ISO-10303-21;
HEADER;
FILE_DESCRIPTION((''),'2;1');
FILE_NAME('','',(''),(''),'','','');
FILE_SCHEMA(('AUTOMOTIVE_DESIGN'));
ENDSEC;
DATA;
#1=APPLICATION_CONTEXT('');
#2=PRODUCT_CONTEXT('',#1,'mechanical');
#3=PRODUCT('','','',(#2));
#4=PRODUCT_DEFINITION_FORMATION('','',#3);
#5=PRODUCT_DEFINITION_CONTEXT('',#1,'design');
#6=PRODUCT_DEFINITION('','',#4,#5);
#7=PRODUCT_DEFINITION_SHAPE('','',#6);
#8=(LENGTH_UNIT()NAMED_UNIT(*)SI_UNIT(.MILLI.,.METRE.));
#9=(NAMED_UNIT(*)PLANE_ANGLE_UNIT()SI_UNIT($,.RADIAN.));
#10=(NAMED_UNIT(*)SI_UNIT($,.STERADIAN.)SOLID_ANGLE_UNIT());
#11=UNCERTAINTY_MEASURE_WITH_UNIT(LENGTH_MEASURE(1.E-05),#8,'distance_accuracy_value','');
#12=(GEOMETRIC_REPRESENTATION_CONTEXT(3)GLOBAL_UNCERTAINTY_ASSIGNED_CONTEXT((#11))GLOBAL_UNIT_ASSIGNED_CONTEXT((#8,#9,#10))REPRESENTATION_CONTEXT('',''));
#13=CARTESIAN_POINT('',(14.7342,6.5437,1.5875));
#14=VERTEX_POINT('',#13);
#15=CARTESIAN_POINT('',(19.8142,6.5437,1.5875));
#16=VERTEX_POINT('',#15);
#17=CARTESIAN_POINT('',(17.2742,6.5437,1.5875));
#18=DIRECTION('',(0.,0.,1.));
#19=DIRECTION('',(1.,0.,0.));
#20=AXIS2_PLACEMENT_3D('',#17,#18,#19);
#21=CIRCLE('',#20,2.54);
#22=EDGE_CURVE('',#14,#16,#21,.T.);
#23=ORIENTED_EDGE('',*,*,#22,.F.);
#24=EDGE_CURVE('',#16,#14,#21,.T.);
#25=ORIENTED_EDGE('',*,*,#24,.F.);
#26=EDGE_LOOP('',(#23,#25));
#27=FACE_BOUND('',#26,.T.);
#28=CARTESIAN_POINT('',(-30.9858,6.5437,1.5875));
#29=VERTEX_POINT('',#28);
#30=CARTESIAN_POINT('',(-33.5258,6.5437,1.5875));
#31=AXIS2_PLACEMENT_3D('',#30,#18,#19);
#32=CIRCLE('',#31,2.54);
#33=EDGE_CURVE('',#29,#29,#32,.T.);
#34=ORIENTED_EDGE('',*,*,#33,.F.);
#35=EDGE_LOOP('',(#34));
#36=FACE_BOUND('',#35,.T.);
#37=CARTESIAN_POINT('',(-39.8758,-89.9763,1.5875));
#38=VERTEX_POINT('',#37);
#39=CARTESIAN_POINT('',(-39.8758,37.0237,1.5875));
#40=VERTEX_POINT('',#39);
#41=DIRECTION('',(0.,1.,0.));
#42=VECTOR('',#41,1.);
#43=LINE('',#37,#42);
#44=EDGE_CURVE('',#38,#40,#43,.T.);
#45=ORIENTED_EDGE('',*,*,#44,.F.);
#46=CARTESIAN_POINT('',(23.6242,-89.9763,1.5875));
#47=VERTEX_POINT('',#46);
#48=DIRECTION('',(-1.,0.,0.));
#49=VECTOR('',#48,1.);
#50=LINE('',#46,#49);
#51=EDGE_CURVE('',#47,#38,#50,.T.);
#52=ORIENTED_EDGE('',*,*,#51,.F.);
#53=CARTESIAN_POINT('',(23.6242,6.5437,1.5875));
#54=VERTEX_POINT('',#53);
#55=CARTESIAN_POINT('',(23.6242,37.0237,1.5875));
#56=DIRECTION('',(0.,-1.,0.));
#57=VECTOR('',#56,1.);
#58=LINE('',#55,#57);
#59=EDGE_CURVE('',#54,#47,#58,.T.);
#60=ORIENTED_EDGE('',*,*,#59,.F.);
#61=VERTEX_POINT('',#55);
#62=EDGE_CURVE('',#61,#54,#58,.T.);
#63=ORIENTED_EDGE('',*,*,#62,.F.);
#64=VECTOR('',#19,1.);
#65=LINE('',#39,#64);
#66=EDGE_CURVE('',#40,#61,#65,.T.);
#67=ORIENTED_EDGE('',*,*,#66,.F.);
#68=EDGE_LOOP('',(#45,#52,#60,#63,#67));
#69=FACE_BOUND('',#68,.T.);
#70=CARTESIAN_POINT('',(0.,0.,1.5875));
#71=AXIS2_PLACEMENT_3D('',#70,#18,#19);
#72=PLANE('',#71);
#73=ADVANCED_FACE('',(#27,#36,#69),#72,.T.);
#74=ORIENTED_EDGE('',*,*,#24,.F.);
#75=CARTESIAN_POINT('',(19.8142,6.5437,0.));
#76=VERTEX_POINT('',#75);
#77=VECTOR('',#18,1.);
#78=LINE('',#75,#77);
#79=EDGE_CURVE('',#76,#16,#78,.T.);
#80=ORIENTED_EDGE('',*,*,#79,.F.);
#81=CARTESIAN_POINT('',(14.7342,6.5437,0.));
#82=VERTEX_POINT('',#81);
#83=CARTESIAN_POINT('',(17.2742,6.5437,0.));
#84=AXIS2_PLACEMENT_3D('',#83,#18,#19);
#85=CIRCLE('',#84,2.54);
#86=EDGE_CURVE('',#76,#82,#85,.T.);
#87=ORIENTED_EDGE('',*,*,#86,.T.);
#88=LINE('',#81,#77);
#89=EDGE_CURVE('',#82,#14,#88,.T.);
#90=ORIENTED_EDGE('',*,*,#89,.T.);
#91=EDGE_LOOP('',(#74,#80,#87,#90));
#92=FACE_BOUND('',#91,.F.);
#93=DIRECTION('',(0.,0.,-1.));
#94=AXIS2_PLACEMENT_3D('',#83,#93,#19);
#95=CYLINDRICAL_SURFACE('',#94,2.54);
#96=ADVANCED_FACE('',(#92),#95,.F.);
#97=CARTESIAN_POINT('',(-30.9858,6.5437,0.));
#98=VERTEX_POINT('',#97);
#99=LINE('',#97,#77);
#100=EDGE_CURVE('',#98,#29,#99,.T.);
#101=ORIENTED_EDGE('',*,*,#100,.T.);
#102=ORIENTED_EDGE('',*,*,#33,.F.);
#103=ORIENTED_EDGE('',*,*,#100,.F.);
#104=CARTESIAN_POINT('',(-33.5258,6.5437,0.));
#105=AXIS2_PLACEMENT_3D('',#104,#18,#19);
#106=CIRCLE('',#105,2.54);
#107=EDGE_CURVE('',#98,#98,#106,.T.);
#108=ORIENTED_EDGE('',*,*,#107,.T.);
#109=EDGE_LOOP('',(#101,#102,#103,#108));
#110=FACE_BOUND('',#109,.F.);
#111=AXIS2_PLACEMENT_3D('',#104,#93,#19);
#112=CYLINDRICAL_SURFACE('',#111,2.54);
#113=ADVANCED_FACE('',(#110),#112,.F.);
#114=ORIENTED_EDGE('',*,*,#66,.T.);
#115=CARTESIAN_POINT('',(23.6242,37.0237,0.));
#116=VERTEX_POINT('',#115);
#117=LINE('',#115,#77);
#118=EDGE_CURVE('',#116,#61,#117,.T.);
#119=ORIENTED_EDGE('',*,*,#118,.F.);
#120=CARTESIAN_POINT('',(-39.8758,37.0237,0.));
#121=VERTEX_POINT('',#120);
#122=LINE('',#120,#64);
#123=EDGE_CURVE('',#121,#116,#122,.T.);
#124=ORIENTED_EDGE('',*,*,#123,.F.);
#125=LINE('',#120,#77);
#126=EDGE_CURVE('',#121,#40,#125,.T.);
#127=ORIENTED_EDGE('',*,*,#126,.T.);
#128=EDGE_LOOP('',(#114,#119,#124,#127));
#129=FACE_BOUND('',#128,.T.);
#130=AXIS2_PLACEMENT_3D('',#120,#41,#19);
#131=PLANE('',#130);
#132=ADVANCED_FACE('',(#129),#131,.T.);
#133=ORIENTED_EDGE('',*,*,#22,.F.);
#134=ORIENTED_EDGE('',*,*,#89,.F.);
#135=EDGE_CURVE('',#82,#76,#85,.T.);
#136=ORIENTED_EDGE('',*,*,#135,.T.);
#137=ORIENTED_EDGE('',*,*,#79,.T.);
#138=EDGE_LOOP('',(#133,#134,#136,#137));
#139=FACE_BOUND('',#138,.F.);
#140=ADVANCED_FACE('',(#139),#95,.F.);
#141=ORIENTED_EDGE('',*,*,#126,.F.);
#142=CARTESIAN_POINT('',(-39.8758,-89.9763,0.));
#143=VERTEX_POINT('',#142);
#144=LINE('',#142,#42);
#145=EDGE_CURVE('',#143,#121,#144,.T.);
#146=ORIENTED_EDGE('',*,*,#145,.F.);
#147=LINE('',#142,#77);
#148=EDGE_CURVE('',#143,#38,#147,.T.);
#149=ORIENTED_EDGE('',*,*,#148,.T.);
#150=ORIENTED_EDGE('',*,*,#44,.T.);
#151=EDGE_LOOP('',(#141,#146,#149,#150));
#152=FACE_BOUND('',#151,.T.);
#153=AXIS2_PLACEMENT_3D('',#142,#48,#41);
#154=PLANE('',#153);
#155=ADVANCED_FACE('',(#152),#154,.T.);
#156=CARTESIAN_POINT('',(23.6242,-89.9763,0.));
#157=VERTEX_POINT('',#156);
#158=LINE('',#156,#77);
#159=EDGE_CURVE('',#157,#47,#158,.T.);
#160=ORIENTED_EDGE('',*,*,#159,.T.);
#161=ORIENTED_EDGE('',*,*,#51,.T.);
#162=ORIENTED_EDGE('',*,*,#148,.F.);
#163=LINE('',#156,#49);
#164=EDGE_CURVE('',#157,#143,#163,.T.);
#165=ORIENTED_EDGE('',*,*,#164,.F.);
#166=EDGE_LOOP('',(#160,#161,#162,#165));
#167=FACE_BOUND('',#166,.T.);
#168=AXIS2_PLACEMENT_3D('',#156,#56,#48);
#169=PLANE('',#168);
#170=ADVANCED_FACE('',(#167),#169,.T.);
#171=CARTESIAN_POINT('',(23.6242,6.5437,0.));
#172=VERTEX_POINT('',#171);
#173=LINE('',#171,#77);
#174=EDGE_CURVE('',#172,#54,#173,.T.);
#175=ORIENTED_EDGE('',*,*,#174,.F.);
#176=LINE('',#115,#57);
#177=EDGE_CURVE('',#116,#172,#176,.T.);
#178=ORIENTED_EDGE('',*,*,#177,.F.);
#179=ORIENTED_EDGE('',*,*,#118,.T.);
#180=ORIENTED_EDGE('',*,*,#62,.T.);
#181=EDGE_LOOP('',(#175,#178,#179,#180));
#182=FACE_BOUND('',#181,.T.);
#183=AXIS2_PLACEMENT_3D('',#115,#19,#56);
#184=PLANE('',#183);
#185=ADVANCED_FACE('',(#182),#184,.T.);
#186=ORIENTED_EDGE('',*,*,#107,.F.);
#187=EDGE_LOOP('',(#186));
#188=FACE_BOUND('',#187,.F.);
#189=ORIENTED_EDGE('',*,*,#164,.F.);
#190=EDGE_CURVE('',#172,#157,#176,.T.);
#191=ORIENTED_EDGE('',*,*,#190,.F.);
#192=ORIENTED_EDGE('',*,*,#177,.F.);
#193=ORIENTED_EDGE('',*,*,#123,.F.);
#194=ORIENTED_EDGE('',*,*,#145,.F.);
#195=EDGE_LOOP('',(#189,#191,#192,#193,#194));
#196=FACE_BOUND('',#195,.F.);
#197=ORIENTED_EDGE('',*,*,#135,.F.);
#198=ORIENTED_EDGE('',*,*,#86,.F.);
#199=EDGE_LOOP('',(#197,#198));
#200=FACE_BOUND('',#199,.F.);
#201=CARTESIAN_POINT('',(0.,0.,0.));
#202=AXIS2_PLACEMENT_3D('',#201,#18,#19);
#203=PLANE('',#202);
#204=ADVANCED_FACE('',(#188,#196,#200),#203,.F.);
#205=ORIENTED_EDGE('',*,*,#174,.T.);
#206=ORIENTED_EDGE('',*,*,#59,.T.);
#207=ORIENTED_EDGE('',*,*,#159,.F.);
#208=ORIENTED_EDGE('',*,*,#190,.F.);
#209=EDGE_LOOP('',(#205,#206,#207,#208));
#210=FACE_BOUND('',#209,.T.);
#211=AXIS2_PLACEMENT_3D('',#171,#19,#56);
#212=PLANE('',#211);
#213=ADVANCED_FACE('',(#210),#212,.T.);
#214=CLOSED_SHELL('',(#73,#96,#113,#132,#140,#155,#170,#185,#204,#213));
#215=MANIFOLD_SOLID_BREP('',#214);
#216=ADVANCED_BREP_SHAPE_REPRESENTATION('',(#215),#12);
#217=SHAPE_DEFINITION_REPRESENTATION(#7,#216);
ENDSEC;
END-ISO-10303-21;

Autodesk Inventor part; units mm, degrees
ref_plane "YZ Plane" through (0, 0, 0) normal (1, 0, 0) x (0, 1, 0)
ref_plane "XZ Plane" through (0, 0, 0) normal (0, 1, 0) x (-1, 0, 0)
ref_plane "XY Plane" through (0, 0, 0) normal (0, 0, 1) x (1, 0, 0)
sketch "Sketch1" plane through (0, 0, 0) normal (0, 0, 1) x (1, 0, 0)
  line L0 (-39.8758, 37.0237) -> (23.6242, 37.0237)
  line L1 (23.6242, 37.0237) -> (23.6242, -89.9763)
  line L2 (23.6242, -89.9763) -> (-39.8758, -89.9763)
  line L3 (-39.8758, -89.9763) -> (-39.8758, 37.0237)
  line L4 (23.6242, 37.0237) -> (23.6242, 6.5437)
  line L5 (23.6242, 6.5437) -> (17.2742, 6.5437)
  circle A0 centre (17.2742, 6.5437) radius 2.54
  line L6 (17.2742, 6.5437) -> (-33.5258, 6.5437)
  circle A1 centre (-33.5258, 6.5437) radius 2.54
  point P0 (0, 0)
  dimension "d0" = 63.5
  dimension "d1" = 127
  dimension "d4" = 30.48
  dimension "d5" = 6.35
  dimension "d6" = 5.08
  dimension "d7" = 50.8
  dimension "d8" = 5.08
extrude "Extrusion2" add sketch "Sketch1" along normal blind 1.5875
properties part number "Kicker Poly Top Part"
